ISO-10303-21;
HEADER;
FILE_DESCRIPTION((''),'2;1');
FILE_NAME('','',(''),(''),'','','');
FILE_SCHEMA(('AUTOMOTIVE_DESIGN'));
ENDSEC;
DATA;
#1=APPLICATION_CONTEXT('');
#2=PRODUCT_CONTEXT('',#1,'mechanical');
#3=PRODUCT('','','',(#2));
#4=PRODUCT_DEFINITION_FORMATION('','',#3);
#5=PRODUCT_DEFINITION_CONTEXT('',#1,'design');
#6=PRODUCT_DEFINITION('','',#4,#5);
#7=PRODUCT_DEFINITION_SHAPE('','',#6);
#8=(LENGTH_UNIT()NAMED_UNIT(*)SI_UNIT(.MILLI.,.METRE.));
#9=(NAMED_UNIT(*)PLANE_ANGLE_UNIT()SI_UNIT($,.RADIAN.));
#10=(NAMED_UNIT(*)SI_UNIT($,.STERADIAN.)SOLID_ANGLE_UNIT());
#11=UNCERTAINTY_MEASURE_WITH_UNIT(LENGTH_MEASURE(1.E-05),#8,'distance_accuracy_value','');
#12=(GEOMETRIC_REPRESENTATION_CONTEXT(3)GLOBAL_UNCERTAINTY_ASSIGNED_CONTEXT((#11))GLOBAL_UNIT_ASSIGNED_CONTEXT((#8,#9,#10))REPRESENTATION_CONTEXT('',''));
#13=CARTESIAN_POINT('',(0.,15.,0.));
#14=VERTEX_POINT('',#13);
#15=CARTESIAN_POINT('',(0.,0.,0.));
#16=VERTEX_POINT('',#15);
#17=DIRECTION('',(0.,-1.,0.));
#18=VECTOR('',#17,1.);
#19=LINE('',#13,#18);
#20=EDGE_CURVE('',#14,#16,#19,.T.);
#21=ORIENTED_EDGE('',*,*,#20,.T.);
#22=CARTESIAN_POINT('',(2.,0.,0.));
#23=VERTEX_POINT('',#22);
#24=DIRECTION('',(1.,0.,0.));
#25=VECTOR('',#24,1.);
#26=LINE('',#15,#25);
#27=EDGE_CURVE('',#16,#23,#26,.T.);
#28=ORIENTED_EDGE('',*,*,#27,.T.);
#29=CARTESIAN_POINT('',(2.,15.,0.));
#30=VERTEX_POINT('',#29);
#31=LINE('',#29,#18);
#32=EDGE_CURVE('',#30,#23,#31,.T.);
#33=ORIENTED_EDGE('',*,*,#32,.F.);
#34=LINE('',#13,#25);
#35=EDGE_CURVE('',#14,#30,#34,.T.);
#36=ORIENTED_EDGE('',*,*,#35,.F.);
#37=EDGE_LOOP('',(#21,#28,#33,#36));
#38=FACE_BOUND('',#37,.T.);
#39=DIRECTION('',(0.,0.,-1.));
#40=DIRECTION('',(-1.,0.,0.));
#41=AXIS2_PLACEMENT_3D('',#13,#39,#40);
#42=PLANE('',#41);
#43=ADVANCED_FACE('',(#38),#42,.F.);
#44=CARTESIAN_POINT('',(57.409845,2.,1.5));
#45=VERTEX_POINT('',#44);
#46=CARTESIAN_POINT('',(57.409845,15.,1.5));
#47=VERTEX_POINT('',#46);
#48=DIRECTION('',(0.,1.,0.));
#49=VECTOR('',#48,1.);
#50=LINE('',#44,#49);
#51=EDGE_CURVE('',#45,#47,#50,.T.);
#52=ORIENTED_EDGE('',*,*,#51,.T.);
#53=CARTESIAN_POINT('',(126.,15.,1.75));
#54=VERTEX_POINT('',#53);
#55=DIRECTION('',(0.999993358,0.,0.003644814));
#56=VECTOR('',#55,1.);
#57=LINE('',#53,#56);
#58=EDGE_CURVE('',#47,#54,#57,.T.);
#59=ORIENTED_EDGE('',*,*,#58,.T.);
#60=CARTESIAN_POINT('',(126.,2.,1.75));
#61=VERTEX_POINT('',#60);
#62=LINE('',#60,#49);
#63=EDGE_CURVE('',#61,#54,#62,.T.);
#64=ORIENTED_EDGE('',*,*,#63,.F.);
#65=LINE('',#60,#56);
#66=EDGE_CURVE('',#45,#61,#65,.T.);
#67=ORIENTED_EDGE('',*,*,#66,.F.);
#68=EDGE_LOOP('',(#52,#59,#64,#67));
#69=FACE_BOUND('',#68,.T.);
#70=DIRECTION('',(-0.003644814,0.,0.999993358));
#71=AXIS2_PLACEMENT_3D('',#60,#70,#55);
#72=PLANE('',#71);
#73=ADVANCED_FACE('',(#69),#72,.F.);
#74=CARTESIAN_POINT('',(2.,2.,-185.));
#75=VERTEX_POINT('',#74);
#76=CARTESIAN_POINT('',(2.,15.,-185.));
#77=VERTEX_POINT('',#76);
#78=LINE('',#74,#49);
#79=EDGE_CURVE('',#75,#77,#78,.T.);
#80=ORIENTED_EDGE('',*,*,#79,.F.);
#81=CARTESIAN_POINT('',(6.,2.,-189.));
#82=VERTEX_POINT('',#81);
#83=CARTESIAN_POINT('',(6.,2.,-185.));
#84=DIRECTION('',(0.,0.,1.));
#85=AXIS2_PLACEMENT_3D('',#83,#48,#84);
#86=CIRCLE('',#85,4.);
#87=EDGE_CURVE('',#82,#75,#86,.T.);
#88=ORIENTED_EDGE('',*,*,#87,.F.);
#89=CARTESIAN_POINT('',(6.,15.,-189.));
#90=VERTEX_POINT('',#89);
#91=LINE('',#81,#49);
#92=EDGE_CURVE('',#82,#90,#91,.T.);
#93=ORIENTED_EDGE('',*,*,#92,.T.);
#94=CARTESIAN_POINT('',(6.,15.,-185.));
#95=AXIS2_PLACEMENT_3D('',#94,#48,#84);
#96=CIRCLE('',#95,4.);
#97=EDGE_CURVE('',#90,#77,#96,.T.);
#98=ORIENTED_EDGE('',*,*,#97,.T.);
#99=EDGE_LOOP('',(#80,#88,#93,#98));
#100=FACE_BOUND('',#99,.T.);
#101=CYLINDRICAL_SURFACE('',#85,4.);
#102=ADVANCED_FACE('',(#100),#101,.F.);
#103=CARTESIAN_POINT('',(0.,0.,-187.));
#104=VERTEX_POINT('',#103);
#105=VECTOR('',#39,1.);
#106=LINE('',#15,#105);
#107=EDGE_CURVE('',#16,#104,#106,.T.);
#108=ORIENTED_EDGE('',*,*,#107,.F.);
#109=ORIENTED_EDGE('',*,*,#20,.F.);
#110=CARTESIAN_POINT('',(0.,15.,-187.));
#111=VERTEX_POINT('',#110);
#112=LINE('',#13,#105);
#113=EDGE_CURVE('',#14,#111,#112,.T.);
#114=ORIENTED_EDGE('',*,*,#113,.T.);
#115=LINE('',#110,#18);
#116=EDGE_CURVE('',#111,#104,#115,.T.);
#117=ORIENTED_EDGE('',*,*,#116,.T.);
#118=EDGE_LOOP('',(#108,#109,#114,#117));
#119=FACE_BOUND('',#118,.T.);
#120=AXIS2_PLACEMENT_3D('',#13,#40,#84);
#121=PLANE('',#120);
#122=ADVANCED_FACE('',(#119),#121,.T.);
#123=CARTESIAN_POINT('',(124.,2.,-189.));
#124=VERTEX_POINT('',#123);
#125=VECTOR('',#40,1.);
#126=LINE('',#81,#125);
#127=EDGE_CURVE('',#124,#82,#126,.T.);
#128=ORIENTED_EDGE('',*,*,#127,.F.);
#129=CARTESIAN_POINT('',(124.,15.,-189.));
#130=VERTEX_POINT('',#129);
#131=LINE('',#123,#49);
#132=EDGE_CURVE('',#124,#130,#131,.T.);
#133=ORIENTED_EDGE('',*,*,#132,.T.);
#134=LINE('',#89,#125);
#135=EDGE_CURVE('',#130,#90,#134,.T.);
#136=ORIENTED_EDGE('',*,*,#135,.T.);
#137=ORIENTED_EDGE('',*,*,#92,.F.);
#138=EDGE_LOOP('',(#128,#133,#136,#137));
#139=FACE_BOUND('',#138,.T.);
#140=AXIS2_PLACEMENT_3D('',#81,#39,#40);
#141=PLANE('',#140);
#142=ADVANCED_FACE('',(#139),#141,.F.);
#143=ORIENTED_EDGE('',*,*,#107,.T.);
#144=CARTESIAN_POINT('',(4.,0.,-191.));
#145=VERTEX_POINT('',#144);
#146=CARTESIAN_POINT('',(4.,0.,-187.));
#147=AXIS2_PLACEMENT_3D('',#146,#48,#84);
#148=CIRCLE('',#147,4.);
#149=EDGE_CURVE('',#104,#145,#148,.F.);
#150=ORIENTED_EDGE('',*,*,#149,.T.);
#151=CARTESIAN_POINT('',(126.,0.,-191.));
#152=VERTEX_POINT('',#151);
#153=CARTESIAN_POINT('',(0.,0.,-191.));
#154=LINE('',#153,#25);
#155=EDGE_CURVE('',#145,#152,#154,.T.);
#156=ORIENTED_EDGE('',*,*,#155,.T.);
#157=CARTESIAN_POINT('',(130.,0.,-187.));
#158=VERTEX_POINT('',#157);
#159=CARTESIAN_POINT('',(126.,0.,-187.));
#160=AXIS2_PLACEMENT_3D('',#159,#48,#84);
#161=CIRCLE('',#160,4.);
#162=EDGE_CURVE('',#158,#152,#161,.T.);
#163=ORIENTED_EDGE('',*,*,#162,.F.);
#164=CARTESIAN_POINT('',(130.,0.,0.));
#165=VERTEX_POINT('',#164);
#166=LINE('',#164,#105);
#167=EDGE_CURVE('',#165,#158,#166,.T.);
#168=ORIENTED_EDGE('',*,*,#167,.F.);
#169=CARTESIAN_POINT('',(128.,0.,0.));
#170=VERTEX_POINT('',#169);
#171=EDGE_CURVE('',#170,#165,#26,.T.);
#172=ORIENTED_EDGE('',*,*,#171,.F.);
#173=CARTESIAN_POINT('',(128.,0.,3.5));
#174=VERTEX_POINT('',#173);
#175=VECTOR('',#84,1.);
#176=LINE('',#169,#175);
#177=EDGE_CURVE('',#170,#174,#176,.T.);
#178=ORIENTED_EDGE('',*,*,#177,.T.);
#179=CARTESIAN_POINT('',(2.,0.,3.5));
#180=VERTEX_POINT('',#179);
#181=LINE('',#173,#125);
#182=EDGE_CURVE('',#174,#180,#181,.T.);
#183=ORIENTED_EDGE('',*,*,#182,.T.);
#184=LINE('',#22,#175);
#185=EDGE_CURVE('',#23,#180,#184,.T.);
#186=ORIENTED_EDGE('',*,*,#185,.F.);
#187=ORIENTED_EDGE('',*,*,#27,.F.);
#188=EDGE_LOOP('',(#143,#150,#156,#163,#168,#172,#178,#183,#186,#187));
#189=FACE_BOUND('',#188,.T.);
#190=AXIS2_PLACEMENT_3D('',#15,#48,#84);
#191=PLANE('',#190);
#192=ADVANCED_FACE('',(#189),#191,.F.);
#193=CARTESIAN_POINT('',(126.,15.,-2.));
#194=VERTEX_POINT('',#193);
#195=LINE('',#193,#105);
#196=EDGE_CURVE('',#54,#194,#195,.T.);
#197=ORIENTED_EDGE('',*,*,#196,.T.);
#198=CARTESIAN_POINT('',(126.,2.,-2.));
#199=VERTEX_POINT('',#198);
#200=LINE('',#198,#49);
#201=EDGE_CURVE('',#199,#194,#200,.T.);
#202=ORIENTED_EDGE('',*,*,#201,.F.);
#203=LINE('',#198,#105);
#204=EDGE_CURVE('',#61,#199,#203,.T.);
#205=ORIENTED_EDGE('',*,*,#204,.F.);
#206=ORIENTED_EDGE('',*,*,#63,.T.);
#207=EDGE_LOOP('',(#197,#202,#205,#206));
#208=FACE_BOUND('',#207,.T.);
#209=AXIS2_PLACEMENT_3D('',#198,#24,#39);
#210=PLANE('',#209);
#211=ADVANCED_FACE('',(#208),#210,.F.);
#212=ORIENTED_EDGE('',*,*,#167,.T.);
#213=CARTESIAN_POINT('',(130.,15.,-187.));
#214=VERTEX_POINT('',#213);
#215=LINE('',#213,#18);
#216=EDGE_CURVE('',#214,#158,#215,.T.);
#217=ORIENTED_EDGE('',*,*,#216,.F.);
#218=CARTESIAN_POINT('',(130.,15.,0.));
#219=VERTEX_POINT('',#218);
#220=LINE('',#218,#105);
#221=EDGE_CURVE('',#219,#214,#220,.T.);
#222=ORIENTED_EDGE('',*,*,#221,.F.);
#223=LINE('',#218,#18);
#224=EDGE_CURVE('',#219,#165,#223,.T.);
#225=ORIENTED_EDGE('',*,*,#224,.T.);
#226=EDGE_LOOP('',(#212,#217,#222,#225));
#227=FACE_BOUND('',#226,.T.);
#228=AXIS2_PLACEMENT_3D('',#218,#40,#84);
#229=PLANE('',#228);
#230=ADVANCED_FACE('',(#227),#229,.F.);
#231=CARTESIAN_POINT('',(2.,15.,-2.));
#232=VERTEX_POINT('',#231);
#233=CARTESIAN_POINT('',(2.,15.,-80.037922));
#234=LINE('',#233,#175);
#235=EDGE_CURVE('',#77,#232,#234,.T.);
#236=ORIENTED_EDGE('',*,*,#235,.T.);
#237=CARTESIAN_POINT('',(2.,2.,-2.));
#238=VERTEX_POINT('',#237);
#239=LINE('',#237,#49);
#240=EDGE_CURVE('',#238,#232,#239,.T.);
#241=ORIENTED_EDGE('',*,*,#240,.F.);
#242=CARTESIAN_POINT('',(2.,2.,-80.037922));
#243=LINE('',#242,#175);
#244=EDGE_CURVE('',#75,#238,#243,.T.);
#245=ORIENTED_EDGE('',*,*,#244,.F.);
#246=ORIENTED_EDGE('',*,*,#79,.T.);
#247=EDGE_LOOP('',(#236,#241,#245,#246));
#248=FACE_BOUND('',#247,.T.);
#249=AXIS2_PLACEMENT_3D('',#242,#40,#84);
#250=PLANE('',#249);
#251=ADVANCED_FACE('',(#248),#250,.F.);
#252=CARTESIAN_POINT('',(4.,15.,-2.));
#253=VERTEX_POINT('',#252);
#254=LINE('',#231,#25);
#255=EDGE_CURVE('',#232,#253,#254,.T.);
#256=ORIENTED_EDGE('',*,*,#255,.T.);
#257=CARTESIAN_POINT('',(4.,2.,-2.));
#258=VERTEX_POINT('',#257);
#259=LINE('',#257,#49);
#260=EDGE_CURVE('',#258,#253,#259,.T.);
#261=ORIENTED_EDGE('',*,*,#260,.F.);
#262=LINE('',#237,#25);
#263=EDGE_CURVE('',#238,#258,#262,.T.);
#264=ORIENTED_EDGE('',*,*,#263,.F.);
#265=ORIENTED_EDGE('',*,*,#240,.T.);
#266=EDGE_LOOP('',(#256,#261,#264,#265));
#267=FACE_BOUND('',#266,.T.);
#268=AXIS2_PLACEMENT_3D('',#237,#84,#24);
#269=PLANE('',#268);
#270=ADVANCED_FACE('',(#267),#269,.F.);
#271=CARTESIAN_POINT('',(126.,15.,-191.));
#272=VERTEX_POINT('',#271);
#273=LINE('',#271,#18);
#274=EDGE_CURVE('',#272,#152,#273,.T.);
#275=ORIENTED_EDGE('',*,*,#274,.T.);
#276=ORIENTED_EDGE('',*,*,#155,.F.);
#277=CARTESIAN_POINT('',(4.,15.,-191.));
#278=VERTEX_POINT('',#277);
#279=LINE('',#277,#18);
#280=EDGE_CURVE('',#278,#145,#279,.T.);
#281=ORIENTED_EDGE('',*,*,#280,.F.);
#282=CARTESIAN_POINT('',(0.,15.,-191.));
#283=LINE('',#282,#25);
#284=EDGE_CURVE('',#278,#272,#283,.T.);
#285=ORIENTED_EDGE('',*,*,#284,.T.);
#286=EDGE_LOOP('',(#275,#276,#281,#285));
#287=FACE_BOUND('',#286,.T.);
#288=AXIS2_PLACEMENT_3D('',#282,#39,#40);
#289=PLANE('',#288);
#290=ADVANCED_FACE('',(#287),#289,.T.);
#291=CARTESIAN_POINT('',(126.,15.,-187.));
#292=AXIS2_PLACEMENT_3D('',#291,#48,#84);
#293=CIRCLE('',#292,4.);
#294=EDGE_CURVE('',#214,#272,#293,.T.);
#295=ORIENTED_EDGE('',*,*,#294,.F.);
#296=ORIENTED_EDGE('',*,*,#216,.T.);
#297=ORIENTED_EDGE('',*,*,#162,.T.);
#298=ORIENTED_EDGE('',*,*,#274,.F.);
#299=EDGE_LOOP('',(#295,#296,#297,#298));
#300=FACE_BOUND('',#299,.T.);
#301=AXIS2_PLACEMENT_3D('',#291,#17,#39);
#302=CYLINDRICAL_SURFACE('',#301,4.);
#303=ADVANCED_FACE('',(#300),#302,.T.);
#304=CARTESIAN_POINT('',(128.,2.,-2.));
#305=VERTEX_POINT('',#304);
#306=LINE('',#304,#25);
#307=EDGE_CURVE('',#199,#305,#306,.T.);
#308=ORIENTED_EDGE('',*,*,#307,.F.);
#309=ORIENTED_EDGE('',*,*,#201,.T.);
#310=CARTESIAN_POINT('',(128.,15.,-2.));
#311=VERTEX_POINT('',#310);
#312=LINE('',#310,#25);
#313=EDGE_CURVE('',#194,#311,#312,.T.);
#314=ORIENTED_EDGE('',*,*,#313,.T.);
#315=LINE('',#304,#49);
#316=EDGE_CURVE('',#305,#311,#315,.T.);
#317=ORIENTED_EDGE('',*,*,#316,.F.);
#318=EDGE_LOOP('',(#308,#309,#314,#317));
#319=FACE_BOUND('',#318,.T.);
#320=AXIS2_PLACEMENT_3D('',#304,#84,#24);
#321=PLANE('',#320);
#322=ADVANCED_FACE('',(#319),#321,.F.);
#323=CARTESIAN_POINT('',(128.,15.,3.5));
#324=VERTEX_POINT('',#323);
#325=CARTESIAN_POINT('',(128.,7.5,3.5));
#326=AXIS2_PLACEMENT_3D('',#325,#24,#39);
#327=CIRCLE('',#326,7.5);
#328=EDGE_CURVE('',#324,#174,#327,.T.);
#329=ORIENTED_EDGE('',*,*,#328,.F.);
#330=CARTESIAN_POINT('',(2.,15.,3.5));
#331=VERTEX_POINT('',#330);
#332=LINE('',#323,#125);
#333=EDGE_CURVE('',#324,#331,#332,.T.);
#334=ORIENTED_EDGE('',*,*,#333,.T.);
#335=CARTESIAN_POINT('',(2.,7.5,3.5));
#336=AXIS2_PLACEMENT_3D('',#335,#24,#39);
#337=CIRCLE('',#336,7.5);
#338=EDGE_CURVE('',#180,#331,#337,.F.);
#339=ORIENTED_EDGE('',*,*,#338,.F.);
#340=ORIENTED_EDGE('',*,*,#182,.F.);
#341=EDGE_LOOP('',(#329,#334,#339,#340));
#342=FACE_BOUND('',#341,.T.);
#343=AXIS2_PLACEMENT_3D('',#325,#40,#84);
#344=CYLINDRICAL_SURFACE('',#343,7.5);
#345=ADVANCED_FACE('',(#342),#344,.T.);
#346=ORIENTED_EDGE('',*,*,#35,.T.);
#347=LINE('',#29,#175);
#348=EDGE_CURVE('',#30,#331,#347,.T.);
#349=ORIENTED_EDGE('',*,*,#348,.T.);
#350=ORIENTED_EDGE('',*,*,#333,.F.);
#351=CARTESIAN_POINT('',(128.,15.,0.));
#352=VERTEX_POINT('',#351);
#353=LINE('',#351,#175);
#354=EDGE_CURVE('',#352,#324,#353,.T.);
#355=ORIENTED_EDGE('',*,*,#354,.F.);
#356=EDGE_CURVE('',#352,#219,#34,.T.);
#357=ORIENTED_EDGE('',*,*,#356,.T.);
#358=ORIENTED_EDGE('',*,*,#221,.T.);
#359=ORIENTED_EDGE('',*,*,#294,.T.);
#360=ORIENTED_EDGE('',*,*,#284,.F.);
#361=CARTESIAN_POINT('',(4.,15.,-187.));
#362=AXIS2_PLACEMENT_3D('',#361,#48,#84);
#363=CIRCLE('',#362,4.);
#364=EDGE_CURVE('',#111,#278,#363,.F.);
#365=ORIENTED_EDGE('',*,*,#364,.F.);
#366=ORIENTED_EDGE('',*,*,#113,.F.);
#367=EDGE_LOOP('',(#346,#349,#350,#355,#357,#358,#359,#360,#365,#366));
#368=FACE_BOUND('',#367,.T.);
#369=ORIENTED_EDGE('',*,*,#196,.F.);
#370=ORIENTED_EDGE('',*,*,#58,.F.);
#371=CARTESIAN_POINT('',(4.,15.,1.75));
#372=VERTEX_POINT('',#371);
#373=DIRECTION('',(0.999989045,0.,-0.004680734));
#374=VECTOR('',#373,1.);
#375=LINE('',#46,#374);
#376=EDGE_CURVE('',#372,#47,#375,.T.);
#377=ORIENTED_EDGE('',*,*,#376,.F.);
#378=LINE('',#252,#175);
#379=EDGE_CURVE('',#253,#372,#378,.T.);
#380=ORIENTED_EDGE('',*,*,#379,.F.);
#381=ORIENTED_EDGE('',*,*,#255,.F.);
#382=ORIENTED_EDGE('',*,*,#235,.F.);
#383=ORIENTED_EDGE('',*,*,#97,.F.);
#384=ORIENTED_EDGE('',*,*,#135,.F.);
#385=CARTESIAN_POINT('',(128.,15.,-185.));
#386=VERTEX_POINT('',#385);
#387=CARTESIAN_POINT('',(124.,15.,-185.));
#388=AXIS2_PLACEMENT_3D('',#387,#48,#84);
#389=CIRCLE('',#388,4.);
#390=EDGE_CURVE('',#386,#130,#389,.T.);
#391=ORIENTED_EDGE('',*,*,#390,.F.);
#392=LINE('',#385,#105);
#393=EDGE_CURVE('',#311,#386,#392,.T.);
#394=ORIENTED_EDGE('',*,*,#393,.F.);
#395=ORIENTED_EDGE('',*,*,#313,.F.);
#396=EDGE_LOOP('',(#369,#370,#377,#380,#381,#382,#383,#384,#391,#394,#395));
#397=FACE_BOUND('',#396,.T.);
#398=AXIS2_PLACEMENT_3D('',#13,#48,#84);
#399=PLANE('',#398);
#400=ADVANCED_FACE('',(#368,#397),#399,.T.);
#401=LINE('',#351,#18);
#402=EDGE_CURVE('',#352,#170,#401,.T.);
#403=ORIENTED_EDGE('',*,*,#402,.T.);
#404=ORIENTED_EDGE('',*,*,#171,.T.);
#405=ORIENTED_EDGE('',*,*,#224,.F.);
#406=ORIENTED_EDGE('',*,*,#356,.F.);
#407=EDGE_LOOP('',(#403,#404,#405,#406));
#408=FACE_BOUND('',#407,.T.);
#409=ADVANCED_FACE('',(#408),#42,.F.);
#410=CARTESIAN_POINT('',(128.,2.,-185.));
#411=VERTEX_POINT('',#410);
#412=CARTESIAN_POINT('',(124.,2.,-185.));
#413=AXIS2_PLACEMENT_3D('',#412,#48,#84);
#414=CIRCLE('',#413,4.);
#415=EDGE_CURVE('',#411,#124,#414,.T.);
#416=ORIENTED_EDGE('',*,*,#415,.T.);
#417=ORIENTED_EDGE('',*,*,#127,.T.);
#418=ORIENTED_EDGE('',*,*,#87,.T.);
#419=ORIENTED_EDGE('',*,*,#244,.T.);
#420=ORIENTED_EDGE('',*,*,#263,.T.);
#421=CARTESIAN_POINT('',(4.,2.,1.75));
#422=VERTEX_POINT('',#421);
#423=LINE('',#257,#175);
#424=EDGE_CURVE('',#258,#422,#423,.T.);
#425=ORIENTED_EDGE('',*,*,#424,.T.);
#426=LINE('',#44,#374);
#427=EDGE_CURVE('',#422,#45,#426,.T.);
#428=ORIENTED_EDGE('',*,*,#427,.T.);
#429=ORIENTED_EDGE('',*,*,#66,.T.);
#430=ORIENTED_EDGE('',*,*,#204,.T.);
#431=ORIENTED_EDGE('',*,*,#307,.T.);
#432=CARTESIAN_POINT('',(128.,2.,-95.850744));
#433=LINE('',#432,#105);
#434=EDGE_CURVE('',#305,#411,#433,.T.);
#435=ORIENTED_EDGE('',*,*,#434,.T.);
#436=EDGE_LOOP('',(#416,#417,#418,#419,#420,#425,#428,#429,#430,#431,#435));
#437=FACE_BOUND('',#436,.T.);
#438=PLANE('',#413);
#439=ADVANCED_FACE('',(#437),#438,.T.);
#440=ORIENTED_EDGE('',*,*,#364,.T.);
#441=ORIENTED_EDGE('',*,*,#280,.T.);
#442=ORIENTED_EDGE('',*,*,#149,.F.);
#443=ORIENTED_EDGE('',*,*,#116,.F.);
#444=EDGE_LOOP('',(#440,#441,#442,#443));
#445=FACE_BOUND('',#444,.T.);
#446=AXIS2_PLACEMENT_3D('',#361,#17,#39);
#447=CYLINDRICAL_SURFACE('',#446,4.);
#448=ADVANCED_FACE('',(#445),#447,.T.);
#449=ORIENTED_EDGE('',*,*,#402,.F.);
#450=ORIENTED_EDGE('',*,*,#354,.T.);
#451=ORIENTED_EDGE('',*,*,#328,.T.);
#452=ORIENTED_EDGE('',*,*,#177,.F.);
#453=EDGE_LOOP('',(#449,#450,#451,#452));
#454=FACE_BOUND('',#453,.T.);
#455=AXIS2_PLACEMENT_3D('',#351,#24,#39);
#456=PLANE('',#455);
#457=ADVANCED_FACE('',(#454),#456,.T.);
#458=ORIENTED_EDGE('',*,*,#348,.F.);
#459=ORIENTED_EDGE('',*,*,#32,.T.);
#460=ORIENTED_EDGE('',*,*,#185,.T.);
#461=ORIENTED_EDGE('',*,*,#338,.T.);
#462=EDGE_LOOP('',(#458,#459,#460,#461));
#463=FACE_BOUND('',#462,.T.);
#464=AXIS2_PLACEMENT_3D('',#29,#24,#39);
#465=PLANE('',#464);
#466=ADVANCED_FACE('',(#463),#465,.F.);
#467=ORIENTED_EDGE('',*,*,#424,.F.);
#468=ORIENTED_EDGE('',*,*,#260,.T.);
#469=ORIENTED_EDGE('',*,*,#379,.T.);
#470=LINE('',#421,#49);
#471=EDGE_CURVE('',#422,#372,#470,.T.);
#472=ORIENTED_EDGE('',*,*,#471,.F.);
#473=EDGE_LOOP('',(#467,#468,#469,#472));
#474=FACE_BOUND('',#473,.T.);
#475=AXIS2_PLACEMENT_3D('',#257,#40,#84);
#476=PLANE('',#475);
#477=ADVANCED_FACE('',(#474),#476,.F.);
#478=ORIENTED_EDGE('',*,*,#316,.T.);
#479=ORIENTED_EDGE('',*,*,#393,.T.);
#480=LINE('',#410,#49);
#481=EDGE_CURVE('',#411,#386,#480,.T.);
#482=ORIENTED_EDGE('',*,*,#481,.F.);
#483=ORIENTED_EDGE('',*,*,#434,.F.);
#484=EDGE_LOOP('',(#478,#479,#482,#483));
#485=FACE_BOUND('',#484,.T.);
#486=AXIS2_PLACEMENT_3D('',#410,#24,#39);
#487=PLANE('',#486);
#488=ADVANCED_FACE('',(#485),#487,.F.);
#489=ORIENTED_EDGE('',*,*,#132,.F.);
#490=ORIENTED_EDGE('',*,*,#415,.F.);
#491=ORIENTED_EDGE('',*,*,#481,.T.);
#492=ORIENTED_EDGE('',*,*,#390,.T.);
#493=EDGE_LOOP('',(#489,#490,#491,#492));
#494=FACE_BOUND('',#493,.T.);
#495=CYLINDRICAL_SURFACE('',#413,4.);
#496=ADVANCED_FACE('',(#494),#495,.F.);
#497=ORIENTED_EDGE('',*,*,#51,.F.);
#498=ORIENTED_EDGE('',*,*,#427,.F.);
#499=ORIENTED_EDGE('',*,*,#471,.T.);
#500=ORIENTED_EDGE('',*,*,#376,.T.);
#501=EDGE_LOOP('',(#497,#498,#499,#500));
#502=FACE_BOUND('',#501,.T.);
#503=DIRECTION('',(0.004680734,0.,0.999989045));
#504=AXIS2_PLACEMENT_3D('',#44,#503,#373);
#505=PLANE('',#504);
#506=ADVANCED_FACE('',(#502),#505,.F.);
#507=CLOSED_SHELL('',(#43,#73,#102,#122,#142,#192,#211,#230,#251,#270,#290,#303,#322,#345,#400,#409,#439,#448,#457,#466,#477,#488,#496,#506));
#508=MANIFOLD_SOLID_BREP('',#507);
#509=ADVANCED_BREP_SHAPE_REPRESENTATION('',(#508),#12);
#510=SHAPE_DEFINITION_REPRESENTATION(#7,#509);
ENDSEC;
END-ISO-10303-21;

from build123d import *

# Parameters (mm, degrees)
SALIENTE_EXTRUIR2_DEPTH = 15
CORTAR_EXTRUIR5_START   = -126
CORTAR_EXTRUIR5_DEPTH   = 126
CORTAR_EXTRUIR6_DEPTH   = 13


# Read off the part's stored shape, not the designer's step: Cortar-Extruir5
with BuildPart() as part:
    # Croquis1 → Saliente-Extruir2 (new body)
    with BuildSketch(Plane(origin=(0, 0, 0), x_dir=(1, 0, 0), z_dir=(0, 1, 0))):
        with BuildLine():
            Line((0, 0), (2, 0))
            Line((2, 0), (2, -11))
            Line((2, -11), (128, -11))
            Line((128, -11), (128, 0))
            Line((128, 0), (130, 0))
            Line((130, 0), (130, 187))
            ThreePointArc((130, 187), (128.828427125, 189.828427125), (126, 191))
            Line((126, 191), (4, 191))
            ThreePointArc((4, 191), (1.171572875, 189.828427125), (0, 187))
            Line((0, 187), (0, 0))
        make_face()
    extrude(amount=SALIENTE_EXTRUIR2_DEPTH)

    # Cortar-Extruir5 outline → Cortar-Extruir5 (cut)
    with BuildSketch(Plane(origin=(128, 0, 0), x_dir=(0, 0, -1), z_dir=(1, 0, 0)).offset(CORTAR_EXTRUIR5_START)):
        with BuildLine():
            Line((-11, 0), (-3.5, 0))
            ThreePointArc((-3.5, 0), (-8.803300859, 2.196699141), (-11, 7.5))
            Line((-11, 7.5), (-11, 0))
        make_face()
        with BuildLine():
            Line((-11, 15), (-11, 7.5))
            ThreePointArc((-11, 7.5), (-8.803300859, 12.803300859), (-3.5, 15))
            Line((-3.5, 15), (-11, 15))
        make_face()
    extrude(amount=CORTAR_EXTRUIR5_DEPTH, mode=Mode.SUBTRACT)

    # Croquis3 → Cortar-Extruir6 (cut)
    with BuildSketch(Plane(origin=(0, 15, 0), x_dir=(1, 0, 0), z_dir=(0, 1, 0))):
        with BuildLine():
            Line((2, 80.037921952), (2, 185))
            ThreePointArc((2, 185), (3.171572875, 187.828427125), (6, 189))
            Line((6, 189), (124, 189))
            ThreePointArc((124, 189), (126.828427125, 187.828427125), (128, 185))
            Line((128, 185), (128, 95.850744251))
            Line((128, 95.850744251), (128, 2))
            Line((128, 2), (126, 2))
            Line((126, 2), (126, -1.75))
            Line((126, -1.75), (57.409845297, -1.5))
            Line((57.409845297, -1.5), (4, -1.75))
            Line((4, -1.75), (4, 2))
            Line((4, 2), (2, 2))
            Line((2, 2), (2, 80.037921952))
        make_face()
    extrude(amount=-CORTAR_EXTRUIR6_DEPTH, mode=Mode.SUBTRACT)


solid = part.part
